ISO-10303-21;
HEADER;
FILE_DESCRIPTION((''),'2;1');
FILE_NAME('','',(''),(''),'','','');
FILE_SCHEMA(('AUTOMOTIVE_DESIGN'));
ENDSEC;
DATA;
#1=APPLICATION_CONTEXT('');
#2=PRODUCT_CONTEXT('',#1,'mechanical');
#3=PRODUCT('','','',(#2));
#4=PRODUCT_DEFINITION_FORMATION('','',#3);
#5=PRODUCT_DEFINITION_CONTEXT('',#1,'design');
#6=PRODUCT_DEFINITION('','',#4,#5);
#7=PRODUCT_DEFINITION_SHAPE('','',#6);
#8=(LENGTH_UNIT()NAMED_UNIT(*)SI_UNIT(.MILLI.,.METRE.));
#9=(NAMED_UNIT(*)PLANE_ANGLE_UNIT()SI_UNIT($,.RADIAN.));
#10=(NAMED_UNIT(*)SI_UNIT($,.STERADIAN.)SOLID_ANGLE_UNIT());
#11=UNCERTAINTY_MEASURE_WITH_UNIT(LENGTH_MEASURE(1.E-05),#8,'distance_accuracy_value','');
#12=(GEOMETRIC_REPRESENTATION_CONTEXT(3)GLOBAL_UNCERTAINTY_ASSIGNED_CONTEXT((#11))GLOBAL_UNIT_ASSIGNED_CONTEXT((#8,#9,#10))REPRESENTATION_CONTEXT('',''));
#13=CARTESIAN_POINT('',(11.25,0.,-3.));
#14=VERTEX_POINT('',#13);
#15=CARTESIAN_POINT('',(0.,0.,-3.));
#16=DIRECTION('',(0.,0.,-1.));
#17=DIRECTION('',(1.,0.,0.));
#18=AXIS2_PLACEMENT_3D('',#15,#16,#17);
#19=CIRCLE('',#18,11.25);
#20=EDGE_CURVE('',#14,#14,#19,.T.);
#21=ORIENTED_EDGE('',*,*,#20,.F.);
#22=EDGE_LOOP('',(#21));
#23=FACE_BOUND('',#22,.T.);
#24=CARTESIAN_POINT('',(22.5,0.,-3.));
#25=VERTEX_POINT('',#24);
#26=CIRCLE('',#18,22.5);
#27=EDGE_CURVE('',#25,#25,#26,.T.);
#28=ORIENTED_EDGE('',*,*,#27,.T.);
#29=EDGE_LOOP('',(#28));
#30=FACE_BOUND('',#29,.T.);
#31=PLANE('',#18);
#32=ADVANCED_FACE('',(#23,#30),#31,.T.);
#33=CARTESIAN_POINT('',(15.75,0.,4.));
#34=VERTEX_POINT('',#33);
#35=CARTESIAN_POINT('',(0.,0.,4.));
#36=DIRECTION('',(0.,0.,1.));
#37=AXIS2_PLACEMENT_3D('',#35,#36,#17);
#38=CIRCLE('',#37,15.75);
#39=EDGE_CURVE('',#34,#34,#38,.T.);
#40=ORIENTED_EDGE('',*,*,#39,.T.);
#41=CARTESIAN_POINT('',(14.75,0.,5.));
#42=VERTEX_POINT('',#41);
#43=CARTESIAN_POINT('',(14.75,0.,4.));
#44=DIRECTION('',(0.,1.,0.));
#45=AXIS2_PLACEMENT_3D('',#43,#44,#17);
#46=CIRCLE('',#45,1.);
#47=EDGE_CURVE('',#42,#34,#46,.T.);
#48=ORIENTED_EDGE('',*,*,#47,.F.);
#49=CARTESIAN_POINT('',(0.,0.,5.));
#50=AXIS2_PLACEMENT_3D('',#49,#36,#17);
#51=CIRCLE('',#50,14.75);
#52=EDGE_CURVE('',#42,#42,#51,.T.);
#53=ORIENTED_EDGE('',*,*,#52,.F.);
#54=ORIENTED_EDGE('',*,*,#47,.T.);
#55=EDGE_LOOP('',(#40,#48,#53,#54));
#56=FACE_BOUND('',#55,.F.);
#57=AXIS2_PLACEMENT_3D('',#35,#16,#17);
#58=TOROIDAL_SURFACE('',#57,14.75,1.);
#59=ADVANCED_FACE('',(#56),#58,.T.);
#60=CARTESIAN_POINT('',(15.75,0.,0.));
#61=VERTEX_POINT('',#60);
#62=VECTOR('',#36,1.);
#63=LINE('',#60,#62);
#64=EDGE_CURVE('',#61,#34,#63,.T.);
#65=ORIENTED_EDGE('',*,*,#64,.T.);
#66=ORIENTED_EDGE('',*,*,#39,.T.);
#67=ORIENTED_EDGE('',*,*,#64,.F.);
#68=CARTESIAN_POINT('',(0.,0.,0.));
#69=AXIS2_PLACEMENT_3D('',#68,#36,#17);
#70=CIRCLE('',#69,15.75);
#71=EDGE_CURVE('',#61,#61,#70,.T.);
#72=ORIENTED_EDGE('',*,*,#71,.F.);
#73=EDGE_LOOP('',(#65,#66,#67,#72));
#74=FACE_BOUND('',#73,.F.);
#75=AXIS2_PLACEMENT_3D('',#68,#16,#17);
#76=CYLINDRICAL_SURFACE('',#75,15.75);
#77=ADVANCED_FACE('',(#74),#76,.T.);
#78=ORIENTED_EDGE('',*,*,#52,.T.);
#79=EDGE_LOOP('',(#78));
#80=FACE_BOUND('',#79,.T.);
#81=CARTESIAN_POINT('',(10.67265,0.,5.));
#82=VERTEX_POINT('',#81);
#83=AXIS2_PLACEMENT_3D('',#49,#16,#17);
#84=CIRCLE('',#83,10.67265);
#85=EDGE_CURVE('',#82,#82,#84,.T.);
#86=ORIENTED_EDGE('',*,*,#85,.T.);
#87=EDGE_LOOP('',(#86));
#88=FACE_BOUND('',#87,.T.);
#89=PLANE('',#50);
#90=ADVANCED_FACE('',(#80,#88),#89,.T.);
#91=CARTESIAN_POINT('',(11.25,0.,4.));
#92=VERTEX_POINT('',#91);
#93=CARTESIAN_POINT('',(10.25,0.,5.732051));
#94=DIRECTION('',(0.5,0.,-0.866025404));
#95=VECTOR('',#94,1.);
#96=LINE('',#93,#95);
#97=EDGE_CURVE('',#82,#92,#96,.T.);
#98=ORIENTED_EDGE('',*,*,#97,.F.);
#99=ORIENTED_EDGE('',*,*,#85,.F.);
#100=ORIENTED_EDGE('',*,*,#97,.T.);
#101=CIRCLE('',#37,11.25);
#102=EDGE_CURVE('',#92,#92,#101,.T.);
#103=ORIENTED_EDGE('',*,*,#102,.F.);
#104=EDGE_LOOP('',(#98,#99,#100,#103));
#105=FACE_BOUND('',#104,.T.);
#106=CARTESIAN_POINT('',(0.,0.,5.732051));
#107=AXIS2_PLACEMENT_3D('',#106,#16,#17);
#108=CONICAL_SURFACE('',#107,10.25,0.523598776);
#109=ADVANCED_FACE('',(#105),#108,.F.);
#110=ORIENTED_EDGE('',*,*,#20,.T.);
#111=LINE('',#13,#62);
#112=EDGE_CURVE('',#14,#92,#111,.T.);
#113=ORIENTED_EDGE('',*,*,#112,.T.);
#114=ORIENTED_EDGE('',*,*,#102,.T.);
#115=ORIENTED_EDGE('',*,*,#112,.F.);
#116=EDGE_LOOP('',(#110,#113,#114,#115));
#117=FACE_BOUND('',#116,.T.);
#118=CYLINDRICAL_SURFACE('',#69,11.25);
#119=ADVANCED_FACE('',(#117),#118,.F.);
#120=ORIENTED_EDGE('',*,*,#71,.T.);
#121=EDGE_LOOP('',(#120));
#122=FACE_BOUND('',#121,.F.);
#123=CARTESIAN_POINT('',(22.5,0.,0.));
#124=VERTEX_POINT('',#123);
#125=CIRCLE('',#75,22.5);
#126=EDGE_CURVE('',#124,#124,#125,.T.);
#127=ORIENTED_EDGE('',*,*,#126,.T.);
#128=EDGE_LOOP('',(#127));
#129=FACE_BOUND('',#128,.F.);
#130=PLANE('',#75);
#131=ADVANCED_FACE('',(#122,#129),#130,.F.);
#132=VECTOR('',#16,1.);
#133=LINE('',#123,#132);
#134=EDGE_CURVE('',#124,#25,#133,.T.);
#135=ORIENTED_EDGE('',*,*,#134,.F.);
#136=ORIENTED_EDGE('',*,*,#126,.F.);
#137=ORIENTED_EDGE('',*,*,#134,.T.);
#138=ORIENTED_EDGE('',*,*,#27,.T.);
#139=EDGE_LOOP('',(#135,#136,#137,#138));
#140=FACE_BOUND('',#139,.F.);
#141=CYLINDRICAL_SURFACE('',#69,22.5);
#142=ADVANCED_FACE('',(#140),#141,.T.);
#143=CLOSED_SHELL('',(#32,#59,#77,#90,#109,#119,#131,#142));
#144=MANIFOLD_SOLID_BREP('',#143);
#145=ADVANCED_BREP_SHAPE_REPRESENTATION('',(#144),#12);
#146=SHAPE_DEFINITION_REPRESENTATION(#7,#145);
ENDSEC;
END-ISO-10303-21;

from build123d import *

# Parameters (mm, degrees)
F0_R        = 15.75
F0_R_2      = 11.25
F1_DEPTH    = 5
F2_R        = 22.5
F2_R_2      = 11.25
F3_DEPTH    = 3
F4_R        = 11.25
F4_R_2      = 10.25
F5_DEPTH    = 1
F6_S5_R     = 11.25
F6_T6_DEPTH = 17
F7_R        = 1


# Not quite as in the source:
# - a fillet or chamfer that OpenCascade refuses, or shapes differently, is made with other operations: its cross-section is extruded or revolved along the edge and cut away or added


with BuildPart() as f1:
    # F0 (on Top) → F1 (new body)
    with BuildSketch(Plane.XY):
        Circle(F0_R)
        Circle(F0_R_2, mode=Mode.SUBTRACT)
    extrude(amount=F1_DEPTH)

    # F2 (on face) → F3 (join)
    with BuildSketch(Plane(origin=(0, 0, 0), x_dir=(1, 0, 0), z_dir=(0, 0, -1))):
        Circle(F2_R)
        Circle(F2_R_2, mode=Mode.SUBTRACT)
    extrude(amount=F3_DEPTH)

    # F4 (on face) → F5 (join)
    with BuildSketch(Plane.XY.offset(5)):
        Circle(F4_R)
        Circle(F4_R_2, mode=Mode.SUBTRACT)
    extrude(amount=-F5_DEPTH)

    # F6: chamfer of 1 x 1.7320508076 on 1 edges, made by hand


with BuildPart() as f6_tool2:
    # F6_s3 → F6_t4 (revolve)
    with BuildSketch(Plane.XZ):
        Polygon((10.25, 5.7320508076), (11.25, 4), (10.25, 4), align=None)
    revolve(axis=Axis((0, 0, 4), (0, 0, 1)))

    # F6_s5 → F6_t6 (intersect, symmetric)
    with BuildSketch(Plane.XY.offset(4.9)):
        Circle(F6_S5_R)
    extrude(amount=F6_T6_DEPTH, both=True, mode=Mode.INTERSECT)


with BuildPart() as f1_1:
    add(f1.part)

    # F6_t1: cut F6_tool2
    add(f6_tool2.part, mode=Mode.SUBTRACT)

    # F7
    f7_edges = [f1_1.edges().sort_by_distance(p)[0] for p in [
        (-15.75, 0, 5),
    ]]
    fillet(f7_edges, radius=F7_R)


solid = f1_1.part
